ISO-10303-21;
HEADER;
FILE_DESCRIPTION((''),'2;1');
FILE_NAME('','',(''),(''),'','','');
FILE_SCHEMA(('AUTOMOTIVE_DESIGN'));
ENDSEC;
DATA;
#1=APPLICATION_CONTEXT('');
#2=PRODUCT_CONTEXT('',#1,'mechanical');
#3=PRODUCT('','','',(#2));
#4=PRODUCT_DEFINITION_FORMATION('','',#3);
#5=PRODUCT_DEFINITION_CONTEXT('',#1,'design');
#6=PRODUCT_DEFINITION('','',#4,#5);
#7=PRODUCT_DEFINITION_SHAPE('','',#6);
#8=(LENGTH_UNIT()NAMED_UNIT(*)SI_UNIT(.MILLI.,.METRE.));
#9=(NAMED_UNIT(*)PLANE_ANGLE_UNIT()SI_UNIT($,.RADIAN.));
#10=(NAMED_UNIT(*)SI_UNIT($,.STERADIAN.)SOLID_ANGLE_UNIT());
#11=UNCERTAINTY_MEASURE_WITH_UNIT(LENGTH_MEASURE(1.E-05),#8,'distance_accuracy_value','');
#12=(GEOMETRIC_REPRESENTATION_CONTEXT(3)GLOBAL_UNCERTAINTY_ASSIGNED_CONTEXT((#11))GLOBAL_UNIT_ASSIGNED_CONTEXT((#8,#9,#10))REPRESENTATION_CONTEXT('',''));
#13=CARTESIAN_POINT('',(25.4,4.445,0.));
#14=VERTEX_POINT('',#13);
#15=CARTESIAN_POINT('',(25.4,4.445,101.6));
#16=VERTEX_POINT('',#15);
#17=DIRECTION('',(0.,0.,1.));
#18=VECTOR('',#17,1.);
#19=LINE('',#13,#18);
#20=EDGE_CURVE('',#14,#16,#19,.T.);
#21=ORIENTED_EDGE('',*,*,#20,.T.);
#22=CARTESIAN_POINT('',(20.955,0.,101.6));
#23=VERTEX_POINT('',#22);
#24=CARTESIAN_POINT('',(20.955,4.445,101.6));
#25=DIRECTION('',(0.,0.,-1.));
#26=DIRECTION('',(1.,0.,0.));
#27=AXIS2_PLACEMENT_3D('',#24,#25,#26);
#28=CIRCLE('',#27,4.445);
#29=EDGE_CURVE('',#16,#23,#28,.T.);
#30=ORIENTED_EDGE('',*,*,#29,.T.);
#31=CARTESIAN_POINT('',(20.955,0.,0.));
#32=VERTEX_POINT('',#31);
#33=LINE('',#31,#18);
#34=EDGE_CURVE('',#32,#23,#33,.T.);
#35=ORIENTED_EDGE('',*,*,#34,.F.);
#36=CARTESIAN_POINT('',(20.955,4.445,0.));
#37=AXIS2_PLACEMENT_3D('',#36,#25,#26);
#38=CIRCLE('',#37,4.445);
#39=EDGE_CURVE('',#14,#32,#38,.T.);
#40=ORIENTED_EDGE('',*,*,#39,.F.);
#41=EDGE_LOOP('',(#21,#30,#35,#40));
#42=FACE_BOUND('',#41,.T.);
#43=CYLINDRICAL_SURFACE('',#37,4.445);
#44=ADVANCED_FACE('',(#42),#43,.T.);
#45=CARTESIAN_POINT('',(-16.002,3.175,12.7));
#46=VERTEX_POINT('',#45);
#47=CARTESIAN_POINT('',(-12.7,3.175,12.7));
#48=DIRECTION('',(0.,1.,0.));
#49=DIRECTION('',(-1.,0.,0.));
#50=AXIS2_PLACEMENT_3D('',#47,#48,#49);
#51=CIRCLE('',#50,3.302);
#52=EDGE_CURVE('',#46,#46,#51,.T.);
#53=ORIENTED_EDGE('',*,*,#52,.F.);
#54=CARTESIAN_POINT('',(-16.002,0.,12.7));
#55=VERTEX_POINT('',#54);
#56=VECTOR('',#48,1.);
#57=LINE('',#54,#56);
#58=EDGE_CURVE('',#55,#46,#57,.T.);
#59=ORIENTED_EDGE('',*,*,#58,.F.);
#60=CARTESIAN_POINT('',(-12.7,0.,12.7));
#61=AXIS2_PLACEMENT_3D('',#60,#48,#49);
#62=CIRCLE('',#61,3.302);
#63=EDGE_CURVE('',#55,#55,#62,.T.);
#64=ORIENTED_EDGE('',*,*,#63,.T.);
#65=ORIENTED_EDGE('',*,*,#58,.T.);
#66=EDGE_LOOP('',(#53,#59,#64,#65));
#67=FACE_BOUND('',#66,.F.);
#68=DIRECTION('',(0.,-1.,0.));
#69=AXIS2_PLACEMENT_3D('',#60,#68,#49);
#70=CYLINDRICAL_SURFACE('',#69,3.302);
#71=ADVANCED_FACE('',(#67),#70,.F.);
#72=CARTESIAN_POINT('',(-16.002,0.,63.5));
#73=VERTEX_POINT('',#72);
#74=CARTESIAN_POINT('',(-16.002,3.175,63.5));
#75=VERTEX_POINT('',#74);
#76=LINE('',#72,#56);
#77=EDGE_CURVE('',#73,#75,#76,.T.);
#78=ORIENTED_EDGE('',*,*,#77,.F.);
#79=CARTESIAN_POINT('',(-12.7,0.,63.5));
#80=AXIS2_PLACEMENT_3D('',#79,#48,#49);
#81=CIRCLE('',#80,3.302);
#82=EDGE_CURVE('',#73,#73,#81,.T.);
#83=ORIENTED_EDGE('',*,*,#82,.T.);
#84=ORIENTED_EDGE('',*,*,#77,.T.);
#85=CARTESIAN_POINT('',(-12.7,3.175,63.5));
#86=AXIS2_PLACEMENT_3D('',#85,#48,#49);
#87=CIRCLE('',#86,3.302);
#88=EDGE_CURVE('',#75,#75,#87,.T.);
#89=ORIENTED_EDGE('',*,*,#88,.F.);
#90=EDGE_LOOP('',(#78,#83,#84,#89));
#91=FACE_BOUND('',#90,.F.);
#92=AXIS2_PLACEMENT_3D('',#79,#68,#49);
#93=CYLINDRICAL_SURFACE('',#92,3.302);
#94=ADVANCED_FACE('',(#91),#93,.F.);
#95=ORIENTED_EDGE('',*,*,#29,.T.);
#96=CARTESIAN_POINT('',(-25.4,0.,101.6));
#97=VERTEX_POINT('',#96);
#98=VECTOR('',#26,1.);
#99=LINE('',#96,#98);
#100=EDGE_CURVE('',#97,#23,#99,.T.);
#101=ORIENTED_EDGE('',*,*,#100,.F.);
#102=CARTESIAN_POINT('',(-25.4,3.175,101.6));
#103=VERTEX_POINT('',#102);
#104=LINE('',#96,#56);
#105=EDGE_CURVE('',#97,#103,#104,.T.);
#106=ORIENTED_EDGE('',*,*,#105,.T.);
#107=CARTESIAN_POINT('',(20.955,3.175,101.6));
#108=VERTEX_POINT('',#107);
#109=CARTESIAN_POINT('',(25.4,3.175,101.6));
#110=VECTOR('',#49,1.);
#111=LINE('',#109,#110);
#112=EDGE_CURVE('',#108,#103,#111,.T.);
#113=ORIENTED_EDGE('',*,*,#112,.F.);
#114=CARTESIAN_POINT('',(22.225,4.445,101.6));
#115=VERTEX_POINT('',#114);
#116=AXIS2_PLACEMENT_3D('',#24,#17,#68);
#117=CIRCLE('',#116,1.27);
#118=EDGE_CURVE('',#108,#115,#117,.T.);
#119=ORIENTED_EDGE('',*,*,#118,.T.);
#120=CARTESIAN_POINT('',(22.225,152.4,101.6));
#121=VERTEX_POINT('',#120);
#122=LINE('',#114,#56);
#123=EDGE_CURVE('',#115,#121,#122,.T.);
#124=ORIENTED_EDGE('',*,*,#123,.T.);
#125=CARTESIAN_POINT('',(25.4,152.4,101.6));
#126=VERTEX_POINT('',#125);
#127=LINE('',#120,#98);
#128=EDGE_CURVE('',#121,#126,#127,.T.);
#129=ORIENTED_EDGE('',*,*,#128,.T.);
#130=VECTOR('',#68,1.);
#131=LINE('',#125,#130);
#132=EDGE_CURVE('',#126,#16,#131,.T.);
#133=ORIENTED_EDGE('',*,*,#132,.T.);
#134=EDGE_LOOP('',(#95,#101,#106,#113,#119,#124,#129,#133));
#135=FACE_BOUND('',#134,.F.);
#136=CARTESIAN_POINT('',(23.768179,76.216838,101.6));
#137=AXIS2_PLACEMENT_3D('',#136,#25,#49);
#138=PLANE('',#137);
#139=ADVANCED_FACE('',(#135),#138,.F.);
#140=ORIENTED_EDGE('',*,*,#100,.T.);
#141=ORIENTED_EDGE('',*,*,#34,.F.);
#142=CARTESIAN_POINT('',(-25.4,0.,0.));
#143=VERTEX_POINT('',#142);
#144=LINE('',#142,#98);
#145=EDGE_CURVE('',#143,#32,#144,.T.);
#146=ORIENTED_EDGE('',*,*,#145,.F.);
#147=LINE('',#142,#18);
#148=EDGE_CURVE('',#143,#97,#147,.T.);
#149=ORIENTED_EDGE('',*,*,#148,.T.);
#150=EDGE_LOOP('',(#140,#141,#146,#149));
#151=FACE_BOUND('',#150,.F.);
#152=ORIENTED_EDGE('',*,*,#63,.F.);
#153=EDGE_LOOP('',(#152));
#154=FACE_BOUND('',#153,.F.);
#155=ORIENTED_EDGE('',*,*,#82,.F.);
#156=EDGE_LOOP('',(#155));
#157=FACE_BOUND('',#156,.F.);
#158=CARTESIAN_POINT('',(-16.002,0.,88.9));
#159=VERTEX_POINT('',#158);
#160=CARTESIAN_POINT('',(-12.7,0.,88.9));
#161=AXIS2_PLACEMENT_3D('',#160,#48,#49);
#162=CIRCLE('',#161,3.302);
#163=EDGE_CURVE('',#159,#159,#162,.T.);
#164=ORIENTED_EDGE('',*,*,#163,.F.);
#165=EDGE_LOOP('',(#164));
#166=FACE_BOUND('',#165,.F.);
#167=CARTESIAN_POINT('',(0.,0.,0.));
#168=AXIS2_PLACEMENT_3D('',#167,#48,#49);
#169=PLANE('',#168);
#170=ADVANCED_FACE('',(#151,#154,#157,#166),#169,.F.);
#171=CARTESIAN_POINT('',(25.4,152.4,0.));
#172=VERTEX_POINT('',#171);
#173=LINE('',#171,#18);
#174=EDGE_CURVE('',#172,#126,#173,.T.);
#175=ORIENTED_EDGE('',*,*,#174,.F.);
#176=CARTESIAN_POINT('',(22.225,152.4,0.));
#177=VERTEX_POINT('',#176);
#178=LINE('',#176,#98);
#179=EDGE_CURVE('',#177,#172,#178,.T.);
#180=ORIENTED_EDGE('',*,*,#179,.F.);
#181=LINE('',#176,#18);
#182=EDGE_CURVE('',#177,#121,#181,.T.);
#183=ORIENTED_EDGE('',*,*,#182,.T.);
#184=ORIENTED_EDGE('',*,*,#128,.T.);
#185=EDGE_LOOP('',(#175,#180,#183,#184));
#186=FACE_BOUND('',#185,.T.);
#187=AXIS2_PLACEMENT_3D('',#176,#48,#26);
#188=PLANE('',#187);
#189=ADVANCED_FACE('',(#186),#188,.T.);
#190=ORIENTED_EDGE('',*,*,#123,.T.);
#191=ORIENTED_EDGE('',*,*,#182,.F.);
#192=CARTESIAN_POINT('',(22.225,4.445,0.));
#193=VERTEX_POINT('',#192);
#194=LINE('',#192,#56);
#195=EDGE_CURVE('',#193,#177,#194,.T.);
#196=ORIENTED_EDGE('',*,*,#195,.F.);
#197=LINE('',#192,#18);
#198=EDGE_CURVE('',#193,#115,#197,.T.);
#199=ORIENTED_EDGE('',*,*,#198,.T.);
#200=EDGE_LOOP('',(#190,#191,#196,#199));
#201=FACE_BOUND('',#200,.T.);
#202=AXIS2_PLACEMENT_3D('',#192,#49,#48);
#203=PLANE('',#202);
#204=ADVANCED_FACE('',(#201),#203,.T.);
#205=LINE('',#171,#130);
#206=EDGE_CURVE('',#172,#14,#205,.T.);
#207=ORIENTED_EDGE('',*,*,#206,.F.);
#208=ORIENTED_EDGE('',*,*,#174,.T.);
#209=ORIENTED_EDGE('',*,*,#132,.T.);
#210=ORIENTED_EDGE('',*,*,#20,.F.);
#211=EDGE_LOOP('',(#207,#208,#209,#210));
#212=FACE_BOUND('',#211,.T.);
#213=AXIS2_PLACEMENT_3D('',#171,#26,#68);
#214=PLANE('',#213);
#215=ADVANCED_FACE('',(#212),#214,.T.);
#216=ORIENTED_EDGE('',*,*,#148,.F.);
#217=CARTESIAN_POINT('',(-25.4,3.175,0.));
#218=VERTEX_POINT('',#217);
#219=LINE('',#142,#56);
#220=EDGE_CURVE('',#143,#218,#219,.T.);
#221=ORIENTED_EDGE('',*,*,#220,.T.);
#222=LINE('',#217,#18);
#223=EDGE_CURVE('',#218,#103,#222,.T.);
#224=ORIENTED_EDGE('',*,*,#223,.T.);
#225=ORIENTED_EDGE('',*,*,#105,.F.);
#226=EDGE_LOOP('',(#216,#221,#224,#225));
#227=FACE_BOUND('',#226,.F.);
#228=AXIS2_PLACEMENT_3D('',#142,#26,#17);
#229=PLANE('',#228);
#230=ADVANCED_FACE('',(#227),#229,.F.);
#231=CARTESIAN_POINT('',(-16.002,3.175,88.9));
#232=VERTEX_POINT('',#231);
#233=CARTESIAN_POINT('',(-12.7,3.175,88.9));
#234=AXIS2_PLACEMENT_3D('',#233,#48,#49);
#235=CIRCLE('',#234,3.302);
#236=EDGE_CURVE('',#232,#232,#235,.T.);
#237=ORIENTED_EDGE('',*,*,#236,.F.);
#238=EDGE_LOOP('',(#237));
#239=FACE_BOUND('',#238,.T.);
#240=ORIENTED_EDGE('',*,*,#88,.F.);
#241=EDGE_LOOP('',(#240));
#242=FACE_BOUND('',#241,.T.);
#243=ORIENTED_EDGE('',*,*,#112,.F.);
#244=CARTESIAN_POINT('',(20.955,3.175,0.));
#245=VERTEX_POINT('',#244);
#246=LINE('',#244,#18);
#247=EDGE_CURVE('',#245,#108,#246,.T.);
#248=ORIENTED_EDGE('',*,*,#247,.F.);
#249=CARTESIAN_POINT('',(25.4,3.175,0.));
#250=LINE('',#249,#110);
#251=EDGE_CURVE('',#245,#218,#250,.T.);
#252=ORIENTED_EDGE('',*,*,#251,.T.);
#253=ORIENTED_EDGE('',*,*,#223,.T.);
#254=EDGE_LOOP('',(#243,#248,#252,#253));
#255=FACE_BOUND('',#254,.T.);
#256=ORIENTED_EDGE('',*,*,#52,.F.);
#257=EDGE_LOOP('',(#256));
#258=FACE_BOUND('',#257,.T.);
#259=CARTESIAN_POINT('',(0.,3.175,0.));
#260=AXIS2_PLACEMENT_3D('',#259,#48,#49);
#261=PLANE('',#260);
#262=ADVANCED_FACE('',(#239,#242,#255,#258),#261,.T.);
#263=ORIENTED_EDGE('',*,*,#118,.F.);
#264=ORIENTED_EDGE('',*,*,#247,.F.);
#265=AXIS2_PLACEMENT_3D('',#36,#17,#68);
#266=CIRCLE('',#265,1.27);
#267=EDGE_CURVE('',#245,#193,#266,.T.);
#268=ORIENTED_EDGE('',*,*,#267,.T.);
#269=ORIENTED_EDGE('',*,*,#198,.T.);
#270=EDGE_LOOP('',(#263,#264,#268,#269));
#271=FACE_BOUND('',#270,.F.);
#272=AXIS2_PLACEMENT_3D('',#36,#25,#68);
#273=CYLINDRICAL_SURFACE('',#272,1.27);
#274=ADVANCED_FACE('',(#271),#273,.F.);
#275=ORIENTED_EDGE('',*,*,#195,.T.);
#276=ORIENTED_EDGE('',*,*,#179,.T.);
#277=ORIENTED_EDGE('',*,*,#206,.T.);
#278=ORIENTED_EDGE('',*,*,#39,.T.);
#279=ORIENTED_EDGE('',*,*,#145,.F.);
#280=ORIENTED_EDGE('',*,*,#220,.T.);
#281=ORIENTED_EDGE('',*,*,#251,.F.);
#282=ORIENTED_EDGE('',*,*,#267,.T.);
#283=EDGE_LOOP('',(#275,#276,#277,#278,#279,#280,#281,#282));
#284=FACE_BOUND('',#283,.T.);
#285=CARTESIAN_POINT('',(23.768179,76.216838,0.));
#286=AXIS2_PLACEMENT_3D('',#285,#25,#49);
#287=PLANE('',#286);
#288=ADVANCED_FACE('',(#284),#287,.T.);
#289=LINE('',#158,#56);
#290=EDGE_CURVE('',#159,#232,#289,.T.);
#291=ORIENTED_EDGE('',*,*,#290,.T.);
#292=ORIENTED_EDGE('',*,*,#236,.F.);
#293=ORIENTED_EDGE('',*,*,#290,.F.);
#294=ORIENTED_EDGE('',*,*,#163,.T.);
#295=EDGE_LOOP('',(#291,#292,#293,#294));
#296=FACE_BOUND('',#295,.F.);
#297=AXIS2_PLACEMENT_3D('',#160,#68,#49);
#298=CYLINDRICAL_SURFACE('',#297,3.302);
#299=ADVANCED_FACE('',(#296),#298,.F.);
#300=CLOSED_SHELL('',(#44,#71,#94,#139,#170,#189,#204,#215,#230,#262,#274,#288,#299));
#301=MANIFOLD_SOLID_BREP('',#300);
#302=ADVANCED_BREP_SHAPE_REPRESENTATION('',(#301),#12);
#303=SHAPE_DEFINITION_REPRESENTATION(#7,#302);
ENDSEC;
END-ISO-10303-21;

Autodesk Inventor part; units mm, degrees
ref_plane "YZ Plane" through (0, 0, 0) normal (1, 0, 0) x (0, 1, 0)
ref_plane "XZ Plane" through (0, 0, 0) normal (0, 1, 0) x (-1, 0, 0)
ref_plane "XY Plane" through (0, 0, 0) normal (0, 0, 1) x (1, 0, 0)
sketch "Sketch1" plane through (0, 0, 0) normal (0, 1, 0) x (-1, 0, 0)
  line L0 (0, 0) -> (25.4, 0)
  line L1 (25.4, 0) -> (25.4, 101.6)
  line L2 (25.4, 101.6) -> (0, 101.6)
  line L3 (0, 101.6) -> (0, 0)
  line L4 (12.7, 101.6) -> (12.7, 0) construction
  circle A0 centre (12.7, 12.7) radius 3.302
  circle A1 centre (12.7, 63.5) radius 3.302
  circle A2 centre (12.7, 88.9) radius 3.302
  line L5 (0, 0) -> (-25.4, 0)
  line L6 (-25.4, 0) -> (-25.4, 101.6)
  line L7 (-25.4, 101.6) -> (0, 101.6)
  dimension "d0" = 101.6
  dimension "d2" = 25.4
  dimension "d3" = 6.604
  dimension "d4" = 25.4
  dimension "d5" = 50.8
  dimension "d6" = 12.7
  dimension "d8" = 25.4
extrude "Plate1" add sketch "Sketch1" along normal blind 3.175
sketch "Sketch2" plane through (22.225, 0, 0) normal (1, 0, 0) x (0, 1, 0)
  line L0 (0, 101.6) -> (0, 0)
  line L1 (0, 0) -> (152.4, 0)
  line L2 (152.4, 0) -> (152.4, 101.6)
  line L3 (152.4, 101.6) -> (0, 101.6)
edge flange "Flange1" height 152.4 angle 90 thickness 3.175 bend radius 1.27 thickness toward (1, 0, 0) relief straight relief width 3.175 relief depth 1.5875 edges at (25.4, 3.175, 50.8) wall of the first edge with corners at (22.225, 0, 101.6) (22.225, 0, 0) (22.225, 152.4, 0) (22.225, 152.4, 101.6)
bend "Bend1"
corner "Corner1"
sketch "Sketch3" plane through (25.4, 152.4, 101.6) normal (1, 0, 0) x (0, 0, -1)
  line L0 (0, -147.955) -> (101.6, -147.955) projected
  line L1 (101.6, 0) -> (101.6, -147.955) projected
  line L2 (0, 0) -> (101.6, 0) projected
  line L3 (0, -147.955) -> (0, 0) projected
  line L4 (12.7, -74.295) -> (27.94, -74.295) construction
  line L5 (27.94, -74.295) -> (27.94, -127) construction
  line L6 (27.94, -127) -> (12.7, -127) construction
  line L7 (12.7, -127) -> (12.7, -74.295) construction
  circle A0 centre (12.7, -74.295) radius 2.2225
  circle A1 centre (27.94, -74.295) radius 2.2225
  circle A2 centre (27.94, -127) radius 2.2225
  circle A3 centre (12.7, -127) radius 2.2225
  line L8 (101.6, -152.4) -> (0, -152.4) construction
  circle A4 centre (44.3804, -106.4123) radius 2.2225
  line L9 (44.3804, -106.4123) -> (82.4804, -106.4123) construction
  circle A5 centre (82.4804, -106.4123) radius 2.2225
  dimension "d19" = 52.705
  dimension "d21" = 15.24
  dimension "d22" = 4.445
  dimension "d23" = 25.4
  dimension "d24" = 12.7
  dimension "d25" = 38.1
  dimension "d26" = 4.445
equation "\"d9\" = BendReliefWidth"
equation "\"d10\" = BendReliefDepth"
equation "\"d11\" = MinimumRemnant"
equation "\"d12\" = BendRadius"
equation "\"d16\" = CornerReliefSize"
equation "\"d17\" = GapSize"
equation "\"d18\" = JacobiRadiusSize"
equation "\"BendRadius\" = Thickness"
equation "\"BendReliefWidth\" = Thickness"
equation "\"BendReliefDepth\" = 0.5 * Thickness"
equation "\"CornerReliefSize\" = 4 * Thickness"
equation "\"MinimumRemnant\" = 2 * Thickness"
equation "\"TransitionRadius\" = BendRadius"
equation "\"JacobiRadiusSize\" = Thickness"
equation "\"GapSize\" = Thickness"
equation "\"d7\" = BendRadius"
equation "\"Thickness\" = 3.175"
properties part number "Pneumatic Mount Bracket" material "Aluminum 6061"
